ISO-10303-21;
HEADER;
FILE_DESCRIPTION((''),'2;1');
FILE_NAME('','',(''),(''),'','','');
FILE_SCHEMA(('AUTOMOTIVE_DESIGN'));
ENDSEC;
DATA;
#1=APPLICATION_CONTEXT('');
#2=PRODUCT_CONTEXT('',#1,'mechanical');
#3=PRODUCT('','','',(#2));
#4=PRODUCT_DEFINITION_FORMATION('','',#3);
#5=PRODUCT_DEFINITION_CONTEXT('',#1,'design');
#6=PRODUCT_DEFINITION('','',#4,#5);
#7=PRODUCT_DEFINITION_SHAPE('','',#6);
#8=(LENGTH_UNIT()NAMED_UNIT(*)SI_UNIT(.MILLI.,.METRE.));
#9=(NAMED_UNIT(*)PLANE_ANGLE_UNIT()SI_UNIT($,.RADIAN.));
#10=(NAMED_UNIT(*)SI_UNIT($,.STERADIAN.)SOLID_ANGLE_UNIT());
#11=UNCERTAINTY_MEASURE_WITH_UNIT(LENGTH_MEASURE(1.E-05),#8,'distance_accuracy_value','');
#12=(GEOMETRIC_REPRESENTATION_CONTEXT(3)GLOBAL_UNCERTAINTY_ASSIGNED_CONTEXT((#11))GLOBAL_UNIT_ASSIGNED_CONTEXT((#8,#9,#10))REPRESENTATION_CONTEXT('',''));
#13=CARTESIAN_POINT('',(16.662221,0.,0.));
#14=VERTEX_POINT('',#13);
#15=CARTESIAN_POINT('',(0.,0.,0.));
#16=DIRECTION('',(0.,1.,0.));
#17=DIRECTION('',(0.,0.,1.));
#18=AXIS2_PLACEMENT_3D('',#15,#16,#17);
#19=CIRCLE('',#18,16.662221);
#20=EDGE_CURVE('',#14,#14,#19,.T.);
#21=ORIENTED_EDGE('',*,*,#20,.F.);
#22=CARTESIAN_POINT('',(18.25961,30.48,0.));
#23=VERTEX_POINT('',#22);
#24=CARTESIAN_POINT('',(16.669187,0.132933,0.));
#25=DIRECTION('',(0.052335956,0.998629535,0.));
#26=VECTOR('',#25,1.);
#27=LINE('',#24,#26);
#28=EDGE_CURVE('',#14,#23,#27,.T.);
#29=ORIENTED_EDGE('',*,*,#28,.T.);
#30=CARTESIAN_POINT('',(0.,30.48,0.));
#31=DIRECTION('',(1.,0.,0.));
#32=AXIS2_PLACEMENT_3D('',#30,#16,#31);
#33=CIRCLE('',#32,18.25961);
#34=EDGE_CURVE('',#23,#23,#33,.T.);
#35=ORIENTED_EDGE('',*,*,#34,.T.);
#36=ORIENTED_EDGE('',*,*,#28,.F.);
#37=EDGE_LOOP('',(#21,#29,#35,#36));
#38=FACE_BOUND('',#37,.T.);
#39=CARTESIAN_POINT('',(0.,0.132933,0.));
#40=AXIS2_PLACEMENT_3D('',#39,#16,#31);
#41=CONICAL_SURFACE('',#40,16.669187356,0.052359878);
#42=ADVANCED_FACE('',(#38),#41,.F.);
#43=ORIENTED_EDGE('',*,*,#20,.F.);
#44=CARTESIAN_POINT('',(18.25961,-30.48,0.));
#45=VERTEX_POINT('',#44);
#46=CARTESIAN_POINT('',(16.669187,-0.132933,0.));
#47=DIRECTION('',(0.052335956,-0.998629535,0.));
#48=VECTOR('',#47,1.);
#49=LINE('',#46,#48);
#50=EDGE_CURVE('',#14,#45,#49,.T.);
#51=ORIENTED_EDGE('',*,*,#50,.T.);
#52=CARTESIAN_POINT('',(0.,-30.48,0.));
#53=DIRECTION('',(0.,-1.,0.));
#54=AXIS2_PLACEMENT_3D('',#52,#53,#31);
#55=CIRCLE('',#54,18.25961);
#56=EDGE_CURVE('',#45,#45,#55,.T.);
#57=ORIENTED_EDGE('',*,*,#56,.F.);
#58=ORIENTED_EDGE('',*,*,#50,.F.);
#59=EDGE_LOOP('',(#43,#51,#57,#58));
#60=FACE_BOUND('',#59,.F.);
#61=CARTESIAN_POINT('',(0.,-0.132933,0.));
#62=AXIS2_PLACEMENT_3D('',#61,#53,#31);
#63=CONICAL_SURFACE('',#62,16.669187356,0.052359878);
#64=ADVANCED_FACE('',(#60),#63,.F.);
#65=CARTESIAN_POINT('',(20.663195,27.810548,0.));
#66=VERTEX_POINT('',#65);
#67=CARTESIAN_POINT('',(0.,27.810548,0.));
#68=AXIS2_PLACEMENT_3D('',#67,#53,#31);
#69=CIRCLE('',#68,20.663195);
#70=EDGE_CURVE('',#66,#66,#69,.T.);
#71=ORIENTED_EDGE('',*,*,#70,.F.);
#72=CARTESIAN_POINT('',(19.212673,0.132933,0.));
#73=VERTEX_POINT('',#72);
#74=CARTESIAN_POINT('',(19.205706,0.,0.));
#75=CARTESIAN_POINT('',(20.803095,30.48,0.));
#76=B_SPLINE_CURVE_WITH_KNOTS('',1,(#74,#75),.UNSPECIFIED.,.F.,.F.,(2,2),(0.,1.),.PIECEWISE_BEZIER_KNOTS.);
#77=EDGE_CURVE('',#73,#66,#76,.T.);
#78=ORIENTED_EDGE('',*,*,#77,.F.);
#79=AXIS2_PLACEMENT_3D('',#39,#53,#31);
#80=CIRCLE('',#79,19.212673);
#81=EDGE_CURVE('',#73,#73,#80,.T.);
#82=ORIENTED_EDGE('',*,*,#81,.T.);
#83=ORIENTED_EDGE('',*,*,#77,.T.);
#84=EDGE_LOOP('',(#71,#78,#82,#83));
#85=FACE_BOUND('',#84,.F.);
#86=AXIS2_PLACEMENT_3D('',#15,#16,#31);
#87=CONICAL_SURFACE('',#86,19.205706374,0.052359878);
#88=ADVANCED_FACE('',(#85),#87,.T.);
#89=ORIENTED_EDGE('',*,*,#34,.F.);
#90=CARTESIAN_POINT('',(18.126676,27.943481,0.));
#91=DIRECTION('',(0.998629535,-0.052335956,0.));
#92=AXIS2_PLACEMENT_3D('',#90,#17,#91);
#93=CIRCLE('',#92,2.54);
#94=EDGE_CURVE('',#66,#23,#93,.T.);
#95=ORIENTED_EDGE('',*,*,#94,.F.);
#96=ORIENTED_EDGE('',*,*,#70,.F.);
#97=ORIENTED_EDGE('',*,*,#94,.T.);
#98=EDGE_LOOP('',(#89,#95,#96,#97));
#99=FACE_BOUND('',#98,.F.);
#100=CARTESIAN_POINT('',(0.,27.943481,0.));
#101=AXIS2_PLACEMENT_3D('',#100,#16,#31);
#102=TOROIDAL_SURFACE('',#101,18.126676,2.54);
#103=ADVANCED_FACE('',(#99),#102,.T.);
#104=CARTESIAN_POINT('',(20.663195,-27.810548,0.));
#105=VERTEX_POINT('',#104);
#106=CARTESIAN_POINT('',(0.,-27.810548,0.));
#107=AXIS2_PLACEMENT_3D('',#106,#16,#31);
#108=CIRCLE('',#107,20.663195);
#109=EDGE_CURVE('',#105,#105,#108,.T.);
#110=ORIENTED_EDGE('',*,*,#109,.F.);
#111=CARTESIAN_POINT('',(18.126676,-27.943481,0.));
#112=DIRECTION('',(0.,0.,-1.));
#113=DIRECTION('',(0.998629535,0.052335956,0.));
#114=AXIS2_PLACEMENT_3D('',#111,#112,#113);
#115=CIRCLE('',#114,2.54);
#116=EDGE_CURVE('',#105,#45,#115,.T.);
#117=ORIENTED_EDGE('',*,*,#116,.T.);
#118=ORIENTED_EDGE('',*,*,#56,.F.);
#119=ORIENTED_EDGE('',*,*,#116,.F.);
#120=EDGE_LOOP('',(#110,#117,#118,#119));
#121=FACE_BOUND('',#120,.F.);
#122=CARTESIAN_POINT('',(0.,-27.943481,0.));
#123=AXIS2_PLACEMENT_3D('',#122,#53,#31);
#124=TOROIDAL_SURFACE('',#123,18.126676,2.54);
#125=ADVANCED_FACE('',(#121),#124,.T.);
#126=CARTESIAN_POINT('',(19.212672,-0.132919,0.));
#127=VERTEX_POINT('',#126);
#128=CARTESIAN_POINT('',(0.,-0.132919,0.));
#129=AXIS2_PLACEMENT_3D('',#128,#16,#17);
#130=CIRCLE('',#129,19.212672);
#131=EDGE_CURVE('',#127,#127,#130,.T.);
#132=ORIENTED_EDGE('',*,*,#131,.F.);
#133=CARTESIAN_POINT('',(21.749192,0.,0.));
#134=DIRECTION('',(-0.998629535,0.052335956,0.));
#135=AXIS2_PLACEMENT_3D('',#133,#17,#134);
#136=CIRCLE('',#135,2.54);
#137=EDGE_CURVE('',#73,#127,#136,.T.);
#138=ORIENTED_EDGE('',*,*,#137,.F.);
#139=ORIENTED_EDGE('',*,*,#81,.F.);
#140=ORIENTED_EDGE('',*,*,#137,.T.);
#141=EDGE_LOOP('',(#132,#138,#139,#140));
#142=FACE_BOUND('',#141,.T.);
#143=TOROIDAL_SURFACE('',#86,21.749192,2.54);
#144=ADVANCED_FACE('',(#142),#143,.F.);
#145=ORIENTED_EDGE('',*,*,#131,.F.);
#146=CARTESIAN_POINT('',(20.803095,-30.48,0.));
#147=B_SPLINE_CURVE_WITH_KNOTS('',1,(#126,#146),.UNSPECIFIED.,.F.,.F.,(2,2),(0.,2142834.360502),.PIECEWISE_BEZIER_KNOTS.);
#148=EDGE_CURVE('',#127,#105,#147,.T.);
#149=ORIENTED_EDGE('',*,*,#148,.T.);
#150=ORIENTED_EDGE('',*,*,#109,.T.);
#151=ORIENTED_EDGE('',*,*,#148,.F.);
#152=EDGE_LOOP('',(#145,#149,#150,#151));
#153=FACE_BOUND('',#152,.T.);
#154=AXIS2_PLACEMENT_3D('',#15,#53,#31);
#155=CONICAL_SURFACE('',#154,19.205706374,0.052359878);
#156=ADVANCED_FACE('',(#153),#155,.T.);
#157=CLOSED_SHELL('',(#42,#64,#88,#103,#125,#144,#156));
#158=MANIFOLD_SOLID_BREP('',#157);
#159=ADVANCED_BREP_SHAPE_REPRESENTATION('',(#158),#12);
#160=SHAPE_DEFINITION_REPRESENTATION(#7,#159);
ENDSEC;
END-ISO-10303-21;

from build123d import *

# Parameters (mm, degrees)
F0_R          = 19.2057063742
F1_DEPTH      = 30.48
F1_TAPER      = -3
F1_DEPTH_BACK = 30.48
F1_TAPER_BACK = -3
F2_T          = -2.54


# Not quite as in the source:
# - a fillet or chamfer that OpenCascade refuses, or shapes differently, is made with other operations: its cross-section is extruded or revolved along the edge and cut away or added


with BuildPart() as f1:
    # F0 (on Front) → F1 (new body, two sides)
    with BuildSketch(Plane.XZ) as f1_sk:
        Circle(F0_R)
    extrude(amount=F1_DEPTH, taper=F1_TAPER)
    extrude(f1_sk.sketch, amount=-F1_DEPTH_BACK, taper=F1_TAPER_BACK)

    # F2
    f2_openings = [f1.faces().sort_by_distance(p)[0] for p in [
        (0, -30.48, 0),
        (0, 30.48, 0),
    ]]
    offset(amount=F2_T, openings=f2_openings, kind=Kind.INTERSECTION)

    # F3: fillet of radius 2.54 on 3 edges, made by hand

    # F3_s1 → F3_t2 (revolve)
    with BuildSketch(Plane.XY):
        with BuildLine():
            ThreePointArc((19.2126731148, 0.1329333289), (19.2091921331, 0), (19.2126731148, -0.1329333289))
            Line((19.2126731148, -0.1329333289), (19.1619427344, -0.1355919954))
            Line((19.1619427344, -0.1355919954), (19.1548366591, 0))
            Line((19.1548366591, 0), (19.1619427344, 0.1355919954))
            Line((19.1619427344, 0.1355919954), (19.2126731148, 0.1329333289))
        make_face()
    revolve(axis=Axis((0, 0, 0), (0, -1, 0)))

    # F3_s3 → F3_t4 (revolve, cut)
    with BuildSketch(Plane.XY):
        with BuildLine():
            ThreePointArc((20.6631954174, 27.8105476529), (20.0142642558, 29.6430727219), (18.2596097279, 30.48))
            Line((18.2596097279, 30.48), (18.2622683945, 30.5307303804))
            ThreePointArc((18.2622683945, 30.5307303804), (19.5313526074, 30.5308), (20.8030954868, 30.5308))
            Line((20.8030954868, 30.5308), (20.8538258671, 30.4773413334))
            Line((20.8538258671, 30.4773413334), (20.7139257977, 27.8078889863))
            Line((20.7139257977, 27.8078889863), (20.6631954174, 27.8105476529))
        make_face()
    revolve(axis=Axis((0, 30.48, 0), (0, -1, 0)), mode=Mode.SUBTRACT)

    # F3_s5 → F3_t6 (revolve, cut)
    with BuildSketch(Plane.XY):
        with BuildLine():
            ThreePointArc((20.6631954174, -27.8105476529), (20.0142642558, -29.6430727219), (18.2596097279, -30.48))
            Line((18.2596097279, -30.48), (18.2622683945, -30.5307303804))
            ThreePointArc((18.2622683945, -30.5307303804), (19.5313526074, -30.5308), (20.8030954868, -30.5308))
            Line((20.8030954868, -30.5308), (20.8538258671, -30.4773413334))
            Line((20.8538258671, -30.4773413334), (20.7139257977, -27.8078889863))
            Line((20.7139257977, -27.8078889863), (20.6631954174, -27.8105476529))
        make_face()
    revolve(axis=Axis((0, -30.48, 0), (0, 1, 0)), mode=Mode.SUBTRACT)


solid = f1.part
